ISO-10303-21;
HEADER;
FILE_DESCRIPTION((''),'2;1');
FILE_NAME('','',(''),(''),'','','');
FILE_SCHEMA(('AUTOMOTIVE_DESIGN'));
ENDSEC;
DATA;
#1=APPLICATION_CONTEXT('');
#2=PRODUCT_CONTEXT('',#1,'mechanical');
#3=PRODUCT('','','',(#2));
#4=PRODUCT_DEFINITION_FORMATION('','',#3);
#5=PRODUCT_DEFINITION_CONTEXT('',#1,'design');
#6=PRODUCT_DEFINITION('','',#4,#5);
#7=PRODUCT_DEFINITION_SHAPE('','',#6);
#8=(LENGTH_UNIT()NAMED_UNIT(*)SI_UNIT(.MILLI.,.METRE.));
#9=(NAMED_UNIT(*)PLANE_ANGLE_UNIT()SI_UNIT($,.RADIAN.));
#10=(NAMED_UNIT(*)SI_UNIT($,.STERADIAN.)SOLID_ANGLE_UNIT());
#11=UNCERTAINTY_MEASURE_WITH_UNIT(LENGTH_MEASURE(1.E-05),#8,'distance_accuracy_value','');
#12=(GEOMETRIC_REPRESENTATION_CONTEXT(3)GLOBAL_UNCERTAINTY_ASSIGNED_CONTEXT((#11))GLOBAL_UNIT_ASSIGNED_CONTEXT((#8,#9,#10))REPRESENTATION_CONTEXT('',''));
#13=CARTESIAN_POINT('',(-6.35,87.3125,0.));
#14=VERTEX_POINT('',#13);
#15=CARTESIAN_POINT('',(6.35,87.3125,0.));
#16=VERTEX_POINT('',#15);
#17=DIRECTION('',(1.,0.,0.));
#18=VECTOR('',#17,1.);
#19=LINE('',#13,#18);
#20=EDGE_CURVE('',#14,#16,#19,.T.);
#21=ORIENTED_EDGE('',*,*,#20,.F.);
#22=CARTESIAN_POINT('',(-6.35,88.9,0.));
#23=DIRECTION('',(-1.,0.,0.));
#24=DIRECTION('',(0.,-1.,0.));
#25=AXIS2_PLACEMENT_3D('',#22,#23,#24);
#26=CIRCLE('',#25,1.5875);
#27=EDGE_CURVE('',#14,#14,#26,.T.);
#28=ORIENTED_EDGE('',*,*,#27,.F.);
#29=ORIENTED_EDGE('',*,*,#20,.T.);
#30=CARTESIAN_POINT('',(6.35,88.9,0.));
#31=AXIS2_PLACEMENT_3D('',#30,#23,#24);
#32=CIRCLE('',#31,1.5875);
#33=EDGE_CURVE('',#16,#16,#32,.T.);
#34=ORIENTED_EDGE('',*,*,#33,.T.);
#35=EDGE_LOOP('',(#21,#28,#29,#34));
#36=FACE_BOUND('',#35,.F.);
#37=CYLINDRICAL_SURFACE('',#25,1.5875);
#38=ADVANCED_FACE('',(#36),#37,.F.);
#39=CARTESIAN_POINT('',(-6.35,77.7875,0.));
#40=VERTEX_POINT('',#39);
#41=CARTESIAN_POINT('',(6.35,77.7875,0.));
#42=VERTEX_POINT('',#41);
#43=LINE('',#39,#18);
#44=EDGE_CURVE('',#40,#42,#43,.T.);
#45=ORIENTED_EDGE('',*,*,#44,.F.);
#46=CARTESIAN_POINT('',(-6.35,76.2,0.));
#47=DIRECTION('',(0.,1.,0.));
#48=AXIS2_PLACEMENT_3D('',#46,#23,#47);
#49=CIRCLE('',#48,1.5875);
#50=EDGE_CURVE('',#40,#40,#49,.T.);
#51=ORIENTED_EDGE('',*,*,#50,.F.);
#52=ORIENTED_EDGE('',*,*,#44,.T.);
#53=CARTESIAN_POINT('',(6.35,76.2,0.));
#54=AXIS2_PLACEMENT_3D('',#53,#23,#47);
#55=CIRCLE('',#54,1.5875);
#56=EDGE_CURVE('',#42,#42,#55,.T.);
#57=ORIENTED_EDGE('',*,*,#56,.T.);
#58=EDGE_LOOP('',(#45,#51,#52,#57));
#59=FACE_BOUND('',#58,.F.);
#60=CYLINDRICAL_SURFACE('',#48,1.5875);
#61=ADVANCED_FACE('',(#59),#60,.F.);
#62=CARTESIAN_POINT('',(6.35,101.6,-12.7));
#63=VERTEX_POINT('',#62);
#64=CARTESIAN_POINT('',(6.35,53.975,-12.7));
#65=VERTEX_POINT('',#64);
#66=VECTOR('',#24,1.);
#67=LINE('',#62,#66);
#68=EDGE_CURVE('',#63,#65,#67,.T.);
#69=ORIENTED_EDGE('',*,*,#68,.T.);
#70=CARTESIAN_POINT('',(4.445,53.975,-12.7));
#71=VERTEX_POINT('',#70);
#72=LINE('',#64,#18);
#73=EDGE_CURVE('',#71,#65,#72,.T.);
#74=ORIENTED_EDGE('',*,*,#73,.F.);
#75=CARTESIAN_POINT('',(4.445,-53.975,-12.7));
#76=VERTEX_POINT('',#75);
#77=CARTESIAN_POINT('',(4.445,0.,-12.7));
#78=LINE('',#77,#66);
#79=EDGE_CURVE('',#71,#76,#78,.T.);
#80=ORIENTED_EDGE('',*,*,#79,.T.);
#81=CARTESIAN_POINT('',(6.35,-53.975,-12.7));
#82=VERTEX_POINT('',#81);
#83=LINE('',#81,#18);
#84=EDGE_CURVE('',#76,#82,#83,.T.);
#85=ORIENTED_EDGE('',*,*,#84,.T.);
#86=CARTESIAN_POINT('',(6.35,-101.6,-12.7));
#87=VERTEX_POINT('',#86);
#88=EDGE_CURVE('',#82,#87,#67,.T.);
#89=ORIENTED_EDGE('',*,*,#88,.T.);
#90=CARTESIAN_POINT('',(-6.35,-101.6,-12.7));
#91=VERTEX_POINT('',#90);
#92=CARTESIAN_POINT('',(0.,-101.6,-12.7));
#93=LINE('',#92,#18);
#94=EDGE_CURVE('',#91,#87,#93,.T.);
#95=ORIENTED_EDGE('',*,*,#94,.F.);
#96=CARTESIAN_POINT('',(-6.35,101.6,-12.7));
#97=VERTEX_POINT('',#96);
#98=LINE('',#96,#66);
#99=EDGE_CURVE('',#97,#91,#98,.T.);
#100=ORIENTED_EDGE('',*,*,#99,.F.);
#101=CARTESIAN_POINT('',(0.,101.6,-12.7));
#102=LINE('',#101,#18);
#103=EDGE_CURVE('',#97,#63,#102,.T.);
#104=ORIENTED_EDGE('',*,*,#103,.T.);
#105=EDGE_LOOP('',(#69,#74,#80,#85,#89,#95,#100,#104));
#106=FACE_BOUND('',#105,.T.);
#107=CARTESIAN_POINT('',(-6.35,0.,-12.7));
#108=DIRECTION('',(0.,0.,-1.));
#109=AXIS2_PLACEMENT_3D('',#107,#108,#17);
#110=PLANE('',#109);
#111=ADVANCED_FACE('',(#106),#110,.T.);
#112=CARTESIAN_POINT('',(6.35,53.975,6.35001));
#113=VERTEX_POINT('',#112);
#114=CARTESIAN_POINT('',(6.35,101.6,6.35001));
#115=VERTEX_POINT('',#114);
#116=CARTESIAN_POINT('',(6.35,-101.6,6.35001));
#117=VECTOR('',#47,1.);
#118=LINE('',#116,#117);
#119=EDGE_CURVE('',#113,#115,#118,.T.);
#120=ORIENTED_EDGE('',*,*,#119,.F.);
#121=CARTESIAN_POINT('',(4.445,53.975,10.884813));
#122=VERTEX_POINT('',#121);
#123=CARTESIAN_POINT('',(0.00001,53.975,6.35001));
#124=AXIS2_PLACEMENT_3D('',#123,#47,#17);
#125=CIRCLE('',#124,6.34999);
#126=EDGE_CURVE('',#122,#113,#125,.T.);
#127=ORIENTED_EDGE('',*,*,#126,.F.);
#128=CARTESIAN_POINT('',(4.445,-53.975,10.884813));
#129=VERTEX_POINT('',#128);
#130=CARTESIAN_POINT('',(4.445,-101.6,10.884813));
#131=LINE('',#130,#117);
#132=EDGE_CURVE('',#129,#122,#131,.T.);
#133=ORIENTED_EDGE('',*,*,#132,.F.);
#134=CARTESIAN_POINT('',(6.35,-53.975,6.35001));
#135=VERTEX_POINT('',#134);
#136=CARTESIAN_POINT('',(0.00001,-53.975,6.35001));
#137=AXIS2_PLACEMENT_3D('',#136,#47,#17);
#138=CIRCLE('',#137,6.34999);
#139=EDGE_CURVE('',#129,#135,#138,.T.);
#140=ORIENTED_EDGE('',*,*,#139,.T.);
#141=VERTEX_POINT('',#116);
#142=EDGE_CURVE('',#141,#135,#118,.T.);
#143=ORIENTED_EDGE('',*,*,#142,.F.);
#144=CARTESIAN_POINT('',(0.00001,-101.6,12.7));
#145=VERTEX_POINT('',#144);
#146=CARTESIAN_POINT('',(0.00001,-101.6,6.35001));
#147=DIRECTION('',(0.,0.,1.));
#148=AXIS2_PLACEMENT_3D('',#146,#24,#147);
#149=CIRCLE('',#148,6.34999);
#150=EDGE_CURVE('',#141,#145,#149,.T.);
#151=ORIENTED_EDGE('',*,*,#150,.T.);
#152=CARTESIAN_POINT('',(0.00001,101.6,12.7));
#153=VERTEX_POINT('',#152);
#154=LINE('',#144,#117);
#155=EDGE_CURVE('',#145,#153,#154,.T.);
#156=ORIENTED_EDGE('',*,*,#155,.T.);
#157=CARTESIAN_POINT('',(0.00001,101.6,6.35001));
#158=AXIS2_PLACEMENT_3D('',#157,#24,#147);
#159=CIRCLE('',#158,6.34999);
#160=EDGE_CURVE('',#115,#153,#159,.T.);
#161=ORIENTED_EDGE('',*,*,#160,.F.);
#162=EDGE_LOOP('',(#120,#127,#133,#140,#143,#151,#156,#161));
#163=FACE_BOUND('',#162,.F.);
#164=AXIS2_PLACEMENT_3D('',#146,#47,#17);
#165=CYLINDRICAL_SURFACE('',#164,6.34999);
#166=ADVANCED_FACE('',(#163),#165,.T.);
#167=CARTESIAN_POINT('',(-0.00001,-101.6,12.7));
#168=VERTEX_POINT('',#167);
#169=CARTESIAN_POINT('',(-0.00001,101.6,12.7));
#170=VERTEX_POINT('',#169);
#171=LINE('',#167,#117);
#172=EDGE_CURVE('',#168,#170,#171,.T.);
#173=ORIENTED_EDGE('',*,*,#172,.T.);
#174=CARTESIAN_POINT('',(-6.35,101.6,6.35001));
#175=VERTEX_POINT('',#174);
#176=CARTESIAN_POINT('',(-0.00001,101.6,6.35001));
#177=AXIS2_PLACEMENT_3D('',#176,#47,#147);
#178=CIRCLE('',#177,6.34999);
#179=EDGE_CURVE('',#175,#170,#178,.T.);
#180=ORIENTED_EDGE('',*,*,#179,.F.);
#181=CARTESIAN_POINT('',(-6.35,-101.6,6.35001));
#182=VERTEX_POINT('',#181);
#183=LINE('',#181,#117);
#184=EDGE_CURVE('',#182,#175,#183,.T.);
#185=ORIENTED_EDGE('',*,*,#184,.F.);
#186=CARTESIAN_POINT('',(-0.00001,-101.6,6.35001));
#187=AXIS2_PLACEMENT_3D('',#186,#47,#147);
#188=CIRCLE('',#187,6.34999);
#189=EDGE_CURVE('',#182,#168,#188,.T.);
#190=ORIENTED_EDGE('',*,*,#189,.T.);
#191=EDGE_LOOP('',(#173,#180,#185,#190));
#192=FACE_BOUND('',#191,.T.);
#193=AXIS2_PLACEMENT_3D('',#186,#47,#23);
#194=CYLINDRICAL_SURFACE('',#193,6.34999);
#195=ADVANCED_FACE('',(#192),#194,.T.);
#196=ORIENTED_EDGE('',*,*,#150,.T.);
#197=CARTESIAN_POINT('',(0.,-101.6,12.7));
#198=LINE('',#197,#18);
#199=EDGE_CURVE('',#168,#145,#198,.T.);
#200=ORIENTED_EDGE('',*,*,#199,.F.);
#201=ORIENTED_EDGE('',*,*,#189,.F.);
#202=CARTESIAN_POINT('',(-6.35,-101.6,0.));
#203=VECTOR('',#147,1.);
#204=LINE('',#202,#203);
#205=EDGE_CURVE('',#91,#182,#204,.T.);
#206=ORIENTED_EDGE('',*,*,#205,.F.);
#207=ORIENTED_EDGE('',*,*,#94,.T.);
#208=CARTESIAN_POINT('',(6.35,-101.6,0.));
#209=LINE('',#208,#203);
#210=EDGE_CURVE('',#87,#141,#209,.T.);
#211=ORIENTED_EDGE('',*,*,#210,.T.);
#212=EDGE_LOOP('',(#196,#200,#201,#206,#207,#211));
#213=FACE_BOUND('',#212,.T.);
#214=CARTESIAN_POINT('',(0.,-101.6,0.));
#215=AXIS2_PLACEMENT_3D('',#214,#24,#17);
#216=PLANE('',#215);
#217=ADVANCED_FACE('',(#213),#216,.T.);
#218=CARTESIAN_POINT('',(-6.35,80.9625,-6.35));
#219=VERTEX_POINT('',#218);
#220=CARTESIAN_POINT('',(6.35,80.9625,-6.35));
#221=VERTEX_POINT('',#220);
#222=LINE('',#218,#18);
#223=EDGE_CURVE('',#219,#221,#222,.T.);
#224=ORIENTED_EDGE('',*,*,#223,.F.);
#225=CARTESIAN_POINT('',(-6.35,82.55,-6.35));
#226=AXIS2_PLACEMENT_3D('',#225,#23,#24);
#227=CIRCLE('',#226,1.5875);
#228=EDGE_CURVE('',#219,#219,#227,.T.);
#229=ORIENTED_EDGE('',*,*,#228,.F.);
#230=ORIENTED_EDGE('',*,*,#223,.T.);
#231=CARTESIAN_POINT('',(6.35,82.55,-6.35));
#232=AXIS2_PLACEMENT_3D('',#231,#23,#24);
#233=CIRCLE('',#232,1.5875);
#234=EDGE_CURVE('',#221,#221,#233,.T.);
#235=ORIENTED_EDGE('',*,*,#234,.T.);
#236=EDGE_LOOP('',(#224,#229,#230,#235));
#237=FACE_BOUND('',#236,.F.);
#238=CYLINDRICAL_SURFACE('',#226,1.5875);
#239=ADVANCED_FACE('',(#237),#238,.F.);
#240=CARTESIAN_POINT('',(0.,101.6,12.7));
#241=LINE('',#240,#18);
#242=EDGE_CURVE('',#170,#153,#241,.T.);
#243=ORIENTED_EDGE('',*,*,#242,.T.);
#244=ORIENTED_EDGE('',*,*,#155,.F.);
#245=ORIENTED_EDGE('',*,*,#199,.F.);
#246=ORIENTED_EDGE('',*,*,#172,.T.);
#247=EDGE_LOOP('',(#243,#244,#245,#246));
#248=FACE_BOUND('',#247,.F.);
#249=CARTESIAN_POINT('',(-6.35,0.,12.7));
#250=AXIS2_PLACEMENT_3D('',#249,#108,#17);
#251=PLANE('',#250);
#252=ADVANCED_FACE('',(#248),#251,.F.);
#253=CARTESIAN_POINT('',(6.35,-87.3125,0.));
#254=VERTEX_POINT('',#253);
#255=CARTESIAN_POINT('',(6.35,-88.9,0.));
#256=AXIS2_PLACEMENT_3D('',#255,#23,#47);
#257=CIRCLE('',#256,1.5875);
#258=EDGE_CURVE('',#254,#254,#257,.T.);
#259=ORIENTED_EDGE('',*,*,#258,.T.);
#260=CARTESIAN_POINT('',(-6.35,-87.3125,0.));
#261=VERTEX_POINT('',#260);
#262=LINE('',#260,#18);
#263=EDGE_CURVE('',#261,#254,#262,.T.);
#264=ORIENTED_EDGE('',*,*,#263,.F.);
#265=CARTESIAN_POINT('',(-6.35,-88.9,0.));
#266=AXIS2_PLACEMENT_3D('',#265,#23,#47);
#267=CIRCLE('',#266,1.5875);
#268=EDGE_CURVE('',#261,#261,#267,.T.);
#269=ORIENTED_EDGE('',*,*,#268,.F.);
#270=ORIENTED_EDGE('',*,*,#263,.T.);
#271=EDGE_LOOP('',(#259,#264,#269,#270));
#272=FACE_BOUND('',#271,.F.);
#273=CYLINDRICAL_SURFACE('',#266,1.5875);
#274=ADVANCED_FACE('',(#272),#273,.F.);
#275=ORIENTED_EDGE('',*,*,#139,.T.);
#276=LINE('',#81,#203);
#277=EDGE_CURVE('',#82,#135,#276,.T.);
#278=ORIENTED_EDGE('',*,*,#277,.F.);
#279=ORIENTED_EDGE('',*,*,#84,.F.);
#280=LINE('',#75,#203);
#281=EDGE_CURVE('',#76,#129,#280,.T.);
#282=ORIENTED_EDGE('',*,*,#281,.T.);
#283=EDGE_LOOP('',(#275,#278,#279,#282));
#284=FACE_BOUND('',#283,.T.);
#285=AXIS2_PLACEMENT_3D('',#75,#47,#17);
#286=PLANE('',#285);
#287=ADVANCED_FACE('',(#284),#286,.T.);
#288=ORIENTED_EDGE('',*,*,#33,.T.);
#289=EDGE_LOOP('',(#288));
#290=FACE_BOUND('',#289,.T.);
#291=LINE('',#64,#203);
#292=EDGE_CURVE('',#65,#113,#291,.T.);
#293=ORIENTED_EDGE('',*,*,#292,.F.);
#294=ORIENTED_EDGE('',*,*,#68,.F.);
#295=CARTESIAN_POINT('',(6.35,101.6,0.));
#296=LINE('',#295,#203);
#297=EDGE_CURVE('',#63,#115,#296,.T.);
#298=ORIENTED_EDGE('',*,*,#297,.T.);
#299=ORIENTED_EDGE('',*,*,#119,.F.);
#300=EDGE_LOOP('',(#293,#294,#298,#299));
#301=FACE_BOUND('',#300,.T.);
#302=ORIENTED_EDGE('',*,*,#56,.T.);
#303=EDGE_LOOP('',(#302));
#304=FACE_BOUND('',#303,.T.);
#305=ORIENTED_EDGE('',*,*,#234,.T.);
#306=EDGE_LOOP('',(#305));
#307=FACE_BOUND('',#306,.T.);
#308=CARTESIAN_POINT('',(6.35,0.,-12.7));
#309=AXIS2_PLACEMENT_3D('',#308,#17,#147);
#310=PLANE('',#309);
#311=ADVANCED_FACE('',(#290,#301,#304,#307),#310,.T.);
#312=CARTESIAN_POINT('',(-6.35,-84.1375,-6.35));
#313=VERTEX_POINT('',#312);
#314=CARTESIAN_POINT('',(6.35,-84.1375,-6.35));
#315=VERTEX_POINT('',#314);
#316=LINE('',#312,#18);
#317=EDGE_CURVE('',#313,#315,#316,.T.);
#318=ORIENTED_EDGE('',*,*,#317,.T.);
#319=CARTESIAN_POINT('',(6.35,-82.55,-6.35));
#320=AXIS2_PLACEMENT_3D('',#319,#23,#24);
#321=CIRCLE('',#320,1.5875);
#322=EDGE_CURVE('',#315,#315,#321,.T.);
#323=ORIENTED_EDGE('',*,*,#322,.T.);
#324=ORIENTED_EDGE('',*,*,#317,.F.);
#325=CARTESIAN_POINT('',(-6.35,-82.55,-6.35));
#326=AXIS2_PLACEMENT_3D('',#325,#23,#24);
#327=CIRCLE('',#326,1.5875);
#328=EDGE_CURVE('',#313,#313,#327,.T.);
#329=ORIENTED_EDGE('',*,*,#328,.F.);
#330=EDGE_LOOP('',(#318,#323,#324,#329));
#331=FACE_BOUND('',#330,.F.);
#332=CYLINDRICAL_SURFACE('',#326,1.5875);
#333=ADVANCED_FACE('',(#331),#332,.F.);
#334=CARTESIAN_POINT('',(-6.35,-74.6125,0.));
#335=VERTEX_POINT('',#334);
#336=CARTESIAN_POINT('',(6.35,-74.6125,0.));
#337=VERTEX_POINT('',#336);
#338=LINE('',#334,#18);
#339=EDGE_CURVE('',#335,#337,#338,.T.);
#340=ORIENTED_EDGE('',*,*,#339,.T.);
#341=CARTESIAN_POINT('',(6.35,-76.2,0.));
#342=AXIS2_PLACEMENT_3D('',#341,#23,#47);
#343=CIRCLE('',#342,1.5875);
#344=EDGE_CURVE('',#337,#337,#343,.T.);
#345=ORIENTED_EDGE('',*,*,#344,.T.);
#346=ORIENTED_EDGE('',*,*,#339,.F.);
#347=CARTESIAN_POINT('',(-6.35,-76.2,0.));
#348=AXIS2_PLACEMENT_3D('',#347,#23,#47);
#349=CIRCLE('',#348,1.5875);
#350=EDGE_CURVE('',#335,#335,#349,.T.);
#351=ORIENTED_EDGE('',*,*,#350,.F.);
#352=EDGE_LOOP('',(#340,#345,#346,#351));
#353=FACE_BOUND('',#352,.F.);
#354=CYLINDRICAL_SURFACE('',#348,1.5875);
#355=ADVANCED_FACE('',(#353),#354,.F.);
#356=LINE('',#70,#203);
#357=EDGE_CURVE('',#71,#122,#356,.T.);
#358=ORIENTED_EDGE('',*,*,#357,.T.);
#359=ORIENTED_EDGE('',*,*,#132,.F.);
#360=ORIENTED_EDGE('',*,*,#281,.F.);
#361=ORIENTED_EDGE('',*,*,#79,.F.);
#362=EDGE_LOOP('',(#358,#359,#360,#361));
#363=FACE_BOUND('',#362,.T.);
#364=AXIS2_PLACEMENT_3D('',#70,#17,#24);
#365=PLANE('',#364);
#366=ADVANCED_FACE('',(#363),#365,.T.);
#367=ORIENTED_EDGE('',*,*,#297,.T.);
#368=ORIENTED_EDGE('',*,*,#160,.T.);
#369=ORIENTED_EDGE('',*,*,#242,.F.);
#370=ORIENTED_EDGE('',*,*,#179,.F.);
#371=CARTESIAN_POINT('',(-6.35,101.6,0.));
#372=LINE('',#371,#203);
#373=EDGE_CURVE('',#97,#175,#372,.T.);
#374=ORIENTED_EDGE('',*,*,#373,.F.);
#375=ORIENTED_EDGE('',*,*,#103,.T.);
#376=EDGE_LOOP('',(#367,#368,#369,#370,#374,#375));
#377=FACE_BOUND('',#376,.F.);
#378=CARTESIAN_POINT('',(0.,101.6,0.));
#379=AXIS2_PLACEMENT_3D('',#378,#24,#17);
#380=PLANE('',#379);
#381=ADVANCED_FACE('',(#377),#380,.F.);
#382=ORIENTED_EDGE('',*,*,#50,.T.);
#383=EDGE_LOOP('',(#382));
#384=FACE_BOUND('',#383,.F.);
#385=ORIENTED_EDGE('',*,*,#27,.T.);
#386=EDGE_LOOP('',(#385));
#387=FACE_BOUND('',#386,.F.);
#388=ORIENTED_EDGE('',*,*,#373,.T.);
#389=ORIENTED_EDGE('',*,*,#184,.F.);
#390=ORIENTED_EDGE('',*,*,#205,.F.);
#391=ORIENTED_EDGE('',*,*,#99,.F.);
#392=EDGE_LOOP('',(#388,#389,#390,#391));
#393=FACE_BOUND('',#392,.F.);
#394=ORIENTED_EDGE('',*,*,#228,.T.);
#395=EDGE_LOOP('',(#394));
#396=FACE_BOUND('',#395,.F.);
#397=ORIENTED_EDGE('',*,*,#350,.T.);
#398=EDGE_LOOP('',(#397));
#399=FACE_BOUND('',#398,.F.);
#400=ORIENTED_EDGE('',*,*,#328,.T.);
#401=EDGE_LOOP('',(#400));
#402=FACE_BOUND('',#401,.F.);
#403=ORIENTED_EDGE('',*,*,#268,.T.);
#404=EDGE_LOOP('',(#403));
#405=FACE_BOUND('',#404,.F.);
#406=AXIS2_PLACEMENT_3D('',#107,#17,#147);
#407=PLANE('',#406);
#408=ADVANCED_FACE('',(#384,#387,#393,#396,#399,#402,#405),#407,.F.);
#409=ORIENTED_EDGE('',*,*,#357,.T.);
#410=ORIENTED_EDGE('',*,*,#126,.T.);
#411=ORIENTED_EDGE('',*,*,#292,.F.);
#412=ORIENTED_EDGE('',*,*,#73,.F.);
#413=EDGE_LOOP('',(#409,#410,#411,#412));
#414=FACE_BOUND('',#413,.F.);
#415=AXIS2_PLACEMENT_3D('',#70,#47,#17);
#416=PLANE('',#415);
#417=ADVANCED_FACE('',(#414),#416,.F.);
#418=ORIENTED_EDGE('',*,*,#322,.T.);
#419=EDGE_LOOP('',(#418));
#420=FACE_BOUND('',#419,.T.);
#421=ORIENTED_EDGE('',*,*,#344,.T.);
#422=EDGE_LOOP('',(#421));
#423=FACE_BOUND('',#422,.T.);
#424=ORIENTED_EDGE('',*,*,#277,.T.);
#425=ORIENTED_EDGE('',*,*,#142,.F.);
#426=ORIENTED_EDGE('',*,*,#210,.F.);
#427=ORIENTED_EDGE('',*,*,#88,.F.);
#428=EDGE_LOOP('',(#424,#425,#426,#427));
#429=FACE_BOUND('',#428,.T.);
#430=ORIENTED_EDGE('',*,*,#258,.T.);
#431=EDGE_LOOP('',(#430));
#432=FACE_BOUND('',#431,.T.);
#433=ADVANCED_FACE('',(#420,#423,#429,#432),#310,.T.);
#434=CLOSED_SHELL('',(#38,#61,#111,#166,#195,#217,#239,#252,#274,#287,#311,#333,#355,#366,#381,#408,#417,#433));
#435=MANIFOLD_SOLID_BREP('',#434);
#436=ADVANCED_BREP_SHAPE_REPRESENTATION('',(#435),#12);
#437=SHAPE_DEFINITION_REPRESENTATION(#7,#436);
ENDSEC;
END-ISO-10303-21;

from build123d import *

# Parameters (mm, degrees)
F0_W     = 12.7
F0_H     = 25.4
F1_DEPTH = 101.6
F2_R     = 6.34999
F3_R     = 1.5875
F4_DEPTH = 25.4
F5_W     = 3.81
F5_H     = 107.95
F6_DEPTH = 25.4


# Not quite as in the source:
# - a fillet or chamfer is up to 0.001 mm smaller than in the source, because OpenCascade refuses the exact size


with BuildPart() as f1:
    # F0 (on Front) → F1 (new body, symmetric)
    with BuildSketch(Plane.XZ):
        Rectangle(F0_W, F0_H)
    extrude(amount=F1_DEPTH, both=True)

    # F2 (radius 6.35 in the source; OpenCascade refuses exactly that, so slightly less here)
    f2_edges = [f1.edges().sort_by_distance(p)[0] for p in [
        (-6.35, 0, 12.7),
        (6.35, 0, 12.7),
    ]]
    fillet(f2_edges, radius=F2_R)

    # F3 (on face) → F4 (cut)
    with BuildSketch(Plane(origin=(-6.35, 0, 0), x_dir=(0, -1, 0), z_dir=(-1, 0, 0))):
        with BuildLine():
            Line((-77.7875, 0), (-74.6125, 0))
            ThreePointArc((-74.6125, 0), (-76.2, 1.5875), (-77.7875, 0))
        make_face()
        with Locations((-88.9, 0)):
            Circle(F3_R)
        with BuildLine():
            ThreePointArc((90.4875, 0), (88.9, 1.5875), (87.3125, 0))
            ThreePointArc((87.3125, 0), (88.9, -1.5875), (90.4875, 0))
        make_face()
        with BuildLine():
            ThreePointArc((77.7875, 0), (76.2, 1.5875), (74.6125, 0))
            Line((74.6125, 0), (77.7875, 0))
        make_face()
        with BuildLine():
            Line((77.7875, 0), (74.6125, 0))
            ThreePointArc((74.6125, 0), (76.2, -1.5875), (77.7875, 0))
        make_face()
        with BuildLine():
            ThreePointArc((-77.7875, 0), (-76.2, -1.5875), (-74.6125, 0))
            Line((-74.6125, 0), (-77.7875, 0))
        make_face()
        with Locations((-82.55, -6.35)):
            Circle(F3_R)
        with Locations((82.55, -6.35)):
            Circle(F3_R)
    extrude(amount=-F4_DEPTH, mode=Mode.SUBTRACT)

    # F5 (on face) → F6 (cut)
    with BuildSketch(Plane(origin=(0, 0, -12.7), x_dir=(1, 0, 0), z_dir=(0, 0, -1))):
        with Locations((6.35, 0)):
            Rectangle(F5_W, F5_H)
    extrude(amount=-F6_DEPTH, mode=Mode.SUBTRACT)


solid = f1.part
